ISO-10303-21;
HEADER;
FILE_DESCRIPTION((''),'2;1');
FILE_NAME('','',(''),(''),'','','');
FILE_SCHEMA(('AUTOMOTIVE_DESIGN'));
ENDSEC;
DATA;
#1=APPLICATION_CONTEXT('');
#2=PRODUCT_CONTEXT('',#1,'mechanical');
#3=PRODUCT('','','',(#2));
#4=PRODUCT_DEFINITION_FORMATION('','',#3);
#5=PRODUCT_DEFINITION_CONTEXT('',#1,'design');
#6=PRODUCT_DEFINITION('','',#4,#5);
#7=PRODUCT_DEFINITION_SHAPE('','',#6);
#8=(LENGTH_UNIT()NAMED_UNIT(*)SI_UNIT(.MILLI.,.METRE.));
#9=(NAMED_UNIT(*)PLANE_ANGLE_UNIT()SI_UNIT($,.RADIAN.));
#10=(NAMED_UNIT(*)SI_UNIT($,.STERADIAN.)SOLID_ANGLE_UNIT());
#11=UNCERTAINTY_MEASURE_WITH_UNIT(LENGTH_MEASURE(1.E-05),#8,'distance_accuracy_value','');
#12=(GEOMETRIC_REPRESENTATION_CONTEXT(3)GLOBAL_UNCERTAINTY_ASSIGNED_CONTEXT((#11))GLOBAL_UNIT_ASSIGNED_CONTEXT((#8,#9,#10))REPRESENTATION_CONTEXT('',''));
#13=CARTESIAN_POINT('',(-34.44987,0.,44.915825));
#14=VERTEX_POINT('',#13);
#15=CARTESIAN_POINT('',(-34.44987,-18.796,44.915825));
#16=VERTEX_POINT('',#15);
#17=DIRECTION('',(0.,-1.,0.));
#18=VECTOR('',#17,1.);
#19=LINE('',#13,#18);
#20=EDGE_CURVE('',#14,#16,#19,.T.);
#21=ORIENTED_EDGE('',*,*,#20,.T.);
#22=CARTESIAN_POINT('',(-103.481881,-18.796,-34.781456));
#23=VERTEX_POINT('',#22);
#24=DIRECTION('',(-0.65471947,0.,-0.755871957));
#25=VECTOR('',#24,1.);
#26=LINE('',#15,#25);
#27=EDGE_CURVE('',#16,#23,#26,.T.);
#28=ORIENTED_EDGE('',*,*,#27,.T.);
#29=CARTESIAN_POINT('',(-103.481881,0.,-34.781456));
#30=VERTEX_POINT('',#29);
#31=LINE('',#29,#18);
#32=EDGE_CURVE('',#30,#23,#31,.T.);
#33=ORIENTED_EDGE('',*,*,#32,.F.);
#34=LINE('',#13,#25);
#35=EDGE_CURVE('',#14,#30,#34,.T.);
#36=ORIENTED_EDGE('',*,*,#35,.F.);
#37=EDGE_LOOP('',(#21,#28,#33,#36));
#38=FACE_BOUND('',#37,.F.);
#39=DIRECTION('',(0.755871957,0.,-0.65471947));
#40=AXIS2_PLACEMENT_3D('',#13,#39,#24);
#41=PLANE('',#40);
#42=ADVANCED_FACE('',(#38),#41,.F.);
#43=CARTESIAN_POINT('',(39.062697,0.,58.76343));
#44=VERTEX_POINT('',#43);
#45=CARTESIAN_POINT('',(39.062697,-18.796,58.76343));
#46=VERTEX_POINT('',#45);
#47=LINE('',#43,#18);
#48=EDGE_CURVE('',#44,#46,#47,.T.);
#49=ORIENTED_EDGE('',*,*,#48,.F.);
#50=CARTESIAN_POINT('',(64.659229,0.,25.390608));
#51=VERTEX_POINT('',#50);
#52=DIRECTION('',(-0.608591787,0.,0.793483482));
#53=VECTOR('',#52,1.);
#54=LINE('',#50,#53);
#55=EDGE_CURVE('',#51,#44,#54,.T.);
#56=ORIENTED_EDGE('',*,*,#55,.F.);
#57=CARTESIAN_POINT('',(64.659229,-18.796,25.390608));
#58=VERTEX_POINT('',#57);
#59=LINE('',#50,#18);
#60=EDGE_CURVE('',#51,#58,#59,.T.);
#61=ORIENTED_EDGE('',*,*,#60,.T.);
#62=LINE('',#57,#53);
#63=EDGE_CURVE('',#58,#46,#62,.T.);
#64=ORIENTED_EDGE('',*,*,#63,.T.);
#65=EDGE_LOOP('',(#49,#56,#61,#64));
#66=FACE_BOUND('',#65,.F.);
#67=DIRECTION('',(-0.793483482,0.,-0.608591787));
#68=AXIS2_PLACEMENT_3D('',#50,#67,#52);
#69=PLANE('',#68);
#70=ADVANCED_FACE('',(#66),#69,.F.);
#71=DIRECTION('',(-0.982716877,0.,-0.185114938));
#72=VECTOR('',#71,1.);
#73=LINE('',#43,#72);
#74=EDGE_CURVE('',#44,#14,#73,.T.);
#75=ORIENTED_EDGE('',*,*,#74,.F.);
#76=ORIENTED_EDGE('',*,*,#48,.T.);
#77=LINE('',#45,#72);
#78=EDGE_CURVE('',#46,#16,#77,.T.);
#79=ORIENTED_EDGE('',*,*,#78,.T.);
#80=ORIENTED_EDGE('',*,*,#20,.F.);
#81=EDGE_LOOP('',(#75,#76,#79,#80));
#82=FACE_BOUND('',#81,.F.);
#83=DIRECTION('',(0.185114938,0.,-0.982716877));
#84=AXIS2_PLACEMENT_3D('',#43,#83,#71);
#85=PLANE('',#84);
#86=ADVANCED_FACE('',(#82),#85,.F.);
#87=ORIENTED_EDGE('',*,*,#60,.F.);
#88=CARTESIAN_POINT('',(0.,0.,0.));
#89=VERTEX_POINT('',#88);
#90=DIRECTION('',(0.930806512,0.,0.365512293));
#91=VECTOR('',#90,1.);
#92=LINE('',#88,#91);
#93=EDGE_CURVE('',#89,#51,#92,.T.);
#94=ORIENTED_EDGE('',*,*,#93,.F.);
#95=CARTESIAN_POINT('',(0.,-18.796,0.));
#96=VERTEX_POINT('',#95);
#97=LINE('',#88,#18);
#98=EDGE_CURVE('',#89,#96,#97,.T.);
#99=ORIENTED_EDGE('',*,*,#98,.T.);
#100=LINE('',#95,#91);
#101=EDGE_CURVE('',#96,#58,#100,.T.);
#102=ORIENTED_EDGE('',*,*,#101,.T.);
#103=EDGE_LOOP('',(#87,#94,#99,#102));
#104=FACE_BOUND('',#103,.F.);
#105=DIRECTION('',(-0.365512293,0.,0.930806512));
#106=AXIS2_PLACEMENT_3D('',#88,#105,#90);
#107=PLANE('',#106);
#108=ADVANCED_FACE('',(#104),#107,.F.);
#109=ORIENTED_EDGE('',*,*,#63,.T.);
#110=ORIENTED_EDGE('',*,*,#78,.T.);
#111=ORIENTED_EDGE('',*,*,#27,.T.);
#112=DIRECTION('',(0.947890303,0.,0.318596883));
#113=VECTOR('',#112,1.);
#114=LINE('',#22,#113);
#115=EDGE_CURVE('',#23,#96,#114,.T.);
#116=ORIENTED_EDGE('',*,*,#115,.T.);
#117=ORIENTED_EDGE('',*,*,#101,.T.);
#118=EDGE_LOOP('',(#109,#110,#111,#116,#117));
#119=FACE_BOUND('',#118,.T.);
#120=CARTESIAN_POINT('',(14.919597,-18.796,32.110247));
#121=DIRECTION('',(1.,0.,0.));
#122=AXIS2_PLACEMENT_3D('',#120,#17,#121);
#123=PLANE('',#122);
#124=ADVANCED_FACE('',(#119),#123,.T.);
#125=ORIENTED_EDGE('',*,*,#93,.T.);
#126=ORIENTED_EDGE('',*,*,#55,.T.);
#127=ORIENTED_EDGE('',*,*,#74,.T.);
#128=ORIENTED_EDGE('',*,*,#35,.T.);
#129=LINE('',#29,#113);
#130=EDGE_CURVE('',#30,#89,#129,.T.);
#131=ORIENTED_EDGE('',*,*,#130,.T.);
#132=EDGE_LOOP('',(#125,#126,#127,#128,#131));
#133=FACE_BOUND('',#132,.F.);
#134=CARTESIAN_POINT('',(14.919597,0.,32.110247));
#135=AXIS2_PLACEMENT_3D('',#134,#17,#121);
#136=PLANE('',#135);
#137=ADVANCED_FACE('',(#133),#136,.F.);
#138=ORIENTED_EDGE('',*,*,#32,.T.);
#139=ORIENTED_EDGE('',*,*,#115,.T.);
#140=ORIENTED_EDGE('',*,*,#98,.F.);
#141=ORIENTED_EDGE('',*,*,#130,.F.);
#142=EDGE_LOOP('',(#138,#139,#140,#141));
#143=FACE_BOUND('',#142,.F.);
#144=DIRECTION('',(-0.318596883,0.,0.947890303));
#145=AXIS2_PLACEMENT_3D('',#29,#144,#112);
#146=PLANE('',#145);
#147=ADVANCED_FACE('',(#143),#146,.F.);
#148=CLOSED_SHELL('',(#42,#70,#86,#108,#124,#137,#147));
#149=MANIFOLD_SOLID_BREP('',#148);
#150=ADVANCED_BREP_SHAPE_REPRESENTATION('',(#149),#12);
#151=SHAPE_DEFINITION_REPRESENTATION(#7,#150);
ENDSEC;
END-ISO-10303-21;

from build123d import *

# Parameters (mm, degrees)
F1_DEPTH = 18.796


# Not quite as in the source:
# - the program builds the solid bodies; features that only make, move or delete a surface that nothing else refers to are left out


with BuildPart() as f1:
    # F0 (on Front) → F1 (new body)
    with BuildSketch(Plane.XZ):
        Polygon((-34.4498695163, 44.9158253761), (0, 0), (64.659229215, 25.390607867), (39.0626974404, 58.7634295225), align=None)
        Polygon((-103.4818813205, -34.7814559937), (0, 0), (-34.4498695163, 44.9158253761), align=None)
    extrude(amount=F1_DEPTH)


solid = f1.part
